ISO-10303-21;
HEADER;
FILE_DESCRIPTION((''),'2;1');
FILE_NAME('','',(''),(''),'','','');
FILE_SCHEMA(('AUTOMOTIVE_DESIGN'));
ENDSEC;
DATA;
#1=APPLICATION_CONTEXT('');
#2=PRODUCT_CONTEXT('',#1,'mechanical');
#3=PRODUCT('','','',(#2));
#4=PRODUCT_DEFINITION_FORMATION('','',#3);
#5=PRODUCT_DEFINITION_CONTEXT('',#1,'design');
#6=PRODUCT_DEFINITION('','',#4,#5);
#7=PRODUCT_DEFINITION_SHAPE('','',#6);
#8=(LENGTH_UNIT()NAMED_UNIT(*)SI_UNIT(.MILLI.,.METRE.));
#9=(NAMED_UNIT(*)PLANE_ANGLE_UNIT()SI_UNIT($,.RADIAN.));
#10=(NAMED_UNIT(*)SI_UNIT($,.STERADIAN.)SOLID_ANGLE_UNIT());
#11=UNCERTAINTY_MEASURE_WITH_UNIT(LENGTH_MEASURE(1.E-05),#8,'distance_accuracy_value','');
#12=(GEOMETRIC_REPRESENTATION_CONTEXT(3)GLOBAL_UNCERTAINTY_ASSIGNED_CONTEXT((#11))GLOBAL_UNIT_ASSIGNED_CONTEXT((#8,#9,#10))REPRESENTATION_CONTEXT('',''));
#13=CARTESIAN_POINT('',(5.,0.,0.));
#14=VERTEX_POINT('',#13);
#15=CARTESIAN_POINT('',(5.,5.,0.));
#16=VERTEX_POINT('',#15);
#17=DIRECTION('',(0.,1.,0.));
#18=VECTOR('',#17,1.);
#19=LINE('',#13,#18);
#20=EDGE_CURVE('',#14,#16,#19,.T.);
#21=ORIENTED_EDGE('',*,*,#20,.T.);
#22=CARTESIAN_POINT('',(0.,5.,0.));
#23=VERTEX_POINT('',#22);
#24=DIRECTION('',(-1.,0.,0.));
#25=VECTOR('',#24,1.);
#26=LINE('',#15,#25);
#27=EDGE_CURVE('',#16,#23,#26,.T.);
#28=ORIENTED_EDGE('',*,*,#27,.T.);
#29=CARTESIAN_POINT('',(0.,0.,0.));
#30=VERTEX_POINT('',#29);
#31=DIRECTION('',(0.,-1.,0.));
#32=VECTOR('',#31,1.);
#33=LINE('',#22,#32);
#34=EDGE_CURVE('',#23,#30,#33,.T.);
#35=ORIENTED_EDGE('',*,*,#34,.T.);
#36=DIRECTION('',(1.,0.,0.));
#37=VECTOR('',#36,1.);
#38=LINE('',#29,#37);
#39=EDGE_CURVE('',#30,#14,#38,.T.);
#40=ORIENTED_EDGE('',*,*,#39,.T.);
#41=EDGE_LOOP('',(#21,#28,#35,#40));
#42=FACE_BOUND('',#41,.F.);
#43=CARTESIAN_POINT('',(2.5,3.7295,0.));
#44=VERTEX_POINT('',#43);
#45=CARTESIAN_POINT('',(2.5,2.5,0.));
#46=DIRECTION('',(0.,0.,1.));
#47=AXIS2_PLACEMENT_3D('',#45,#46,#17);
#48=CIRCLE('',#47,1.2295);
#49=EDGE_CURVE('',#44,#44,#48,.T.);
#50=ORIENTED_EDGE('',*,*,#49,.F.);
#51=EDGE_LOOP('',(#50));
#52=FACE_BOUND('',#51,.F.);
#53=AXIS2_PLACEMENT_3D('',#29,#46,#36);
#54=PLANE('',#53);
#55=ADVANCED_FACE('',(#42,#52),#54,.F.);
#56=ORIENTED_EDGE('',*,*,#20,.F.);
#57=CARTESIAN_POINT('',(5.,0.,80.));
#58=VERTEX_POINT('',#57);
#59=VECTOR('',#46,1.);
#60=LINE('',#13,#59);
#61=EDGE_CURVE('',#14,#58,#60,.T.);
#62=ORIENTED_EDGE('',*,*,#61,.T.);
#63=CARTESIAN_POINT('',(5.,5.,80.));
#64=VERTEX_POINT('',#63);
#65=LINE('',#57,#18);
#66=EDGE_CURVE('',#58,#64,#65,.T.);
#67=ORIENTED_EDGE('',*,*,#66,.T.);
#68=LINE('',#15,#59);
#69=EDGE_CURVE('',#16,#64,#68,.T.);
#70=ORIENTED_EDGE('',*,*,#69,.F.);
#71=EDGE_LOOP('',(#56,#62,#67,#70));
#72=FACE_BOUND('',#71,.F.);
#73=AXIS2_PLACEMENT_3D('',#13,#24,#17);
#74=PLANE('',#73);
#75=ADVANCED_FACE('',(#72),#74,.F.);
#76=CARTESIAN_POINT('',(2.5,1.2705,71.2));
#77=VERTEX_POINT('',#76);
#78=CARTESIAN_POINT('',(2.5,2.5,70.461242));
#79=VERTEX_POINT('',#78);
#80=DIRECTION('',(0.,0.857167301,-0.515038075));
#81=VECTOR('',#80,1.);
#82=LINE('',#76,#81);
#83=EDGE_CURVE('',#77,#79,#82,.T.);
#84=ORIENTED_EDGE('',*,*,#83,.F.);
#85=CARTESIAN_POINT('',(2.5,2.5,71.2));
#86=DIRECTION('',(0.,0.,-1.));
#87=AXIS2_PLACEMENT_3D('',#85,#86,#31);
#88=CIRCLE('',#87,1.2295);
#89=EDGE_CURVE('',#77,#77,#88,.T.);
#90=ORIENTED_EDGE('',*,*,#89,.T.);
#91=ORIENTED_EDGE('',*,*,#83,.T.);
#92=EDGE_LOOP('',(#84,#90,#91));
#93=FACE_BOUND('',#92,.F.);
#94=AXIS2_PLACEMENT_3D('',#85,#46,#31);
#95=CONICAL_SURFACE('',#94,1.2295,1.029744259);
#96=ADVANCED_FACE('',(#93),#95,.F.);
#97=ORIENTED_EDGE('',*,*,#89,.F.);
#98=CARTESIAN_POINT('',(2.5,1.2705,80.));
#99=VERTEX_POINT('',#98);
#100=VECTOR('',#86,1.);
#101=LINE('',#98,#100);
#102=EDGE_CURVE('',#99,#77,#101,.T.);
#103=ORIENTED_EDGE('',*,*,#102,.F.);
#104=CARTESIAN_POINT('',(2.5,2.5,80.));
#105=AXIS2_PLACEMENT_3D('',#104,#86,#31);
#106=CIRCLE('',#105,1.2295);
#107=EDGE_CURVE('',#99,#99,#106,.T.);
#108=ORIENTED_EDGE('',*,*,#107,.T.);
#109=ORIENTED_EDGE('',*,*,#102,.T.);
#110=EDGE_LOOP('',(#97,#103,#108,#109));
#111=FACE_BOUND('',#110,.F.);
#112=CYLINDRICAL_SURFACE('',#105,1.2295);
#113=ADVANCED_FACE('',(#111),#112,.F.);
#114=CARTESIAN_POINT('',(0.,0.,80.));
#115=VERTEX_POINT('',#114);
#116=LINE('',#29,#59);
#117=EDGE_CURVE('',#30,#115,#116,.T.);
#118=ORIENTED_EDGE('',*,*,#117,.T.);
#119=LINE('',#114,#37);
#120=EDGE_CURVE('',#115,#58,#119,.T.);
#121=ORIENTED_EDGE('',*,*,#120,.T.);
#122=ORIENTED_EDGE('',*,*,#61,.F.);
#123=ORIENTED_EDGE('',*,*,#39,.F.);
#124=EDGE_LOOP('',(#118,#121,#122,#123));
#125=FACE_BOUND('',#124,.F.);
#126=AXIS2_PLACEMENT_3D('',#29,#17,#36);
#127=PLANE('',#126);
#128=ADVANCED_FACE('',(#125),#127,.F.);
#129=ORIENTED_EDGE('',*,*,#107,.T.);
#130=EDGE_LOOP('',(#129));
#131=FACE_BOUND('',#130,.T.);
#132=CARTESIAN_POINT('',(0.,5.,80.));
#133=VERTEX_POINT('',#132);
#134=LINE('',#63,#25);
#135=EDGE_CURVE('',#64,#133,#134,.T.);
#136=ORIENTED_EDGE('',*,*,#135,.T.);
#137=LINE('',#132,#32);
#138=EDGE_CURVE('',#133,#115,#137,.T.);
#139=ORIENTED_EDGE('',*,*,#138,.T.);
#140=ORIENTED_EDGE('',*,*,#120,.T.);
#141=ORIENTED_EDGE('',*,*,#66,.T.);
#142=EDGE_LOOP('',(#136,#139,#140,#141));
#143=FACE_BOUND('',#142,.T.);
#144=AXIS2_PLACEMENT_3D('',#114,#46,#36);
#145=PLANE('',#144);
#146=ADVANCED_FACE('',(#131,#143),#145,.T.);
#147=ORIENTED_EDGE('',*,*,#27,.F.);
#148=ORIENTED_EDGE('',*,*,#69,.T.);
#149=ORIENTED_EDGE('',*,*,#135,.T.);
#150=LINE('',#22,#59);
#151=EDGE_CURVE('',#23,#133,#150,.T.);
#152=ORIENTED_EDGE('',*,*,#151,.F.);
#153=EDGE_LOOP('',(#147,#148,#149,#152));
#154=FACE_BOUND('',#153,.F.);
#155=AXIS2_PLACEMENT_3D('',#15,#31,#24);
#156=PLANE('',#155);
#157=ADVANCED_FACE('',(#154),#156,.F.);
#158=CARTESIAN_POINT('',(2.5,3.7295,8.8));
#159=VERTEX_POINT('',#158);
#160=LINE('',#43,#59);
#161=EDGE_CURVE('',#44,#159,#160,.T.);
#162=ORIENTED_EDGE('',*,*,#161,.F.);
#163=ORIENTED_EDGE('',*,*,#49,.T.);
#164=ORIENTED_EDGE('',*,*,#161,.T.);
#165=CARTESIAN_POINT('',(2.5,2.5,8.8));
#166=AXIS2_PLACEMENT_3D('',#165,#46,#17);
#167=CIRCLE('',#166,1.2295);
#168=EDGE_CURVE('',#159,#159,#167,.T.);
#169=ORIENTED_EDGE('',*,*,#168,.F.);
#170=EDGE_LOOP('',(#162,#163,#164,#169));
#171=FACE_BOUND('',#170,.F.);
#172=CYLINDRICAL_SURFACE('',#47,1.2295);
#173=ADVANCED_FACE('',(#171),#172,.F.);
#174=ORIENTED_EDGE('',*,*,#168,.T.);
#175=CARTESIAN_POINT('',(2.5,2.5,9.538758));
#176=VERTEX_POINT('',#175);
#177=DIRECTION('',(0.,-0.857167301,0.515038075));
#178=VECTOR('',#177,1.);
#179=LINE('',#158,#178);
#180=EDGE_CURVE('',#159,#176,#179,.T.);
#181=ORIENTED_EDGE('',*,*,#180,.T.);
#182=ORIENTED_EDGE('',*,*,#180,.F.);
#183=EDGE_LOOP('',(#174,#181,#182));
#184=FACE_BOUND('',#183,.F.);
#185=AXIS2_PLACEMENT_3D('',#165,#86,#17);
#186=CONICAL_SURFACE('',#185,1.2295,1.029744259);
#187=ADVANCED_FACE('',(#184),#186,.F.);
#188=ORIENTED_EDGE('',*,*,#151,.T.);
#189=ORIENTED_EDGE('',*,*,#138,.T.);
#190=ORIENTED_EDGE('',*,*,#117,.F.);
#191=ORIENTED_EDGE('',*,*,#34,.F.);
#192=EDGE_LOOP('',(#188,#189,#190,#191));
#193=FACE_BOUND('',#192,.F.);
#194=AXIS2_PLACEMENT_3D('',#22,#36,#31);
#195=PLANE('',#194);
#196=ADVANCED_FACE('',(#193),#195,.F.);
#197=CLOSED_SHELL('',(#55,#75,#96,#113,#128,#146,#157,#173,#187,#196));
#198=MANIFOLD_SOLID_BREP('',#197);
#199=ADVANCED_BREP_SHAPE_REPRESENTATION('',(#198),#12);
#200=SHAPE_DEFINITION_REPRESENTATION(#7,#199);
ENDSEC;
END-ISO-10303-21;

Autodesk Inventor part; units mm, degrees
ref_plane "YZ Plane" through (0, 0, 0) normal (1, 0, 0) x (0, 1, 0)
ref_plane "XZ Plane" through (0, 0, 0) normal (0, 1, 0) x (-1, 0, 0)
ref_plane "XY Plane" through (0, 0, 0) normal (0, 0, 1) x (1, 0, 0)
sketch "スケッチ1" plane through (0, 0, 0) normal (0, 0, 1) x (1, 0, 0)
  line L0 (0, 0) -> (5, 0)
  line L1 (5, 0) -> (5, 5)
  line L2 (5, 5) -> (0, 5)
  line L3 (0, 5) -> (0, 0)
  dimension "d0" = 5
  dimension "d1" = 5
extrude "押し出し1" add sketch "スケッチ1" along normal blind 80
sketch "スケッチ2" plane through (0, 0, 80) normal (0, 0, 1) x (1, 0, 0)
  line L0 (0, 0) -> (5, 0) projected
  line L1 (0, 5) -> (0, 0) projected
  point P0 (2.5, 2.5)
  point P1 (2.5, 0)
  point P2 (0, 2.5)
hole "穴1" at (2.5, 2.5, 80) direction (0, 0, -1) diameter 2.459 depth 8.8 tip angle 118 thread size "M3x0.5" class "6H" standard "ANSI Metric M Profile"
sketch "スケッチ3" plane through (0, 0, 0) normal (0, 0, -1) x (-1, 0, 0)
  line L0 (0, 5) -> (0, 0) projected
  line L1 (-5, 5) -> (0, 5) projected
  point P0 (-2.5, 2.5)
  point P1 (0, 2.5)
  point P2 (-2.5, 5)
hole "穴2" at (2.5, 2.5, 0) direction (0, 0, 1) diameter 2.459 depth 8.8 tip angle 118 thread size "M3x0.5" class "6H" standard "ANSI Metric M Profile"
properties part number "天板スペーサ"
